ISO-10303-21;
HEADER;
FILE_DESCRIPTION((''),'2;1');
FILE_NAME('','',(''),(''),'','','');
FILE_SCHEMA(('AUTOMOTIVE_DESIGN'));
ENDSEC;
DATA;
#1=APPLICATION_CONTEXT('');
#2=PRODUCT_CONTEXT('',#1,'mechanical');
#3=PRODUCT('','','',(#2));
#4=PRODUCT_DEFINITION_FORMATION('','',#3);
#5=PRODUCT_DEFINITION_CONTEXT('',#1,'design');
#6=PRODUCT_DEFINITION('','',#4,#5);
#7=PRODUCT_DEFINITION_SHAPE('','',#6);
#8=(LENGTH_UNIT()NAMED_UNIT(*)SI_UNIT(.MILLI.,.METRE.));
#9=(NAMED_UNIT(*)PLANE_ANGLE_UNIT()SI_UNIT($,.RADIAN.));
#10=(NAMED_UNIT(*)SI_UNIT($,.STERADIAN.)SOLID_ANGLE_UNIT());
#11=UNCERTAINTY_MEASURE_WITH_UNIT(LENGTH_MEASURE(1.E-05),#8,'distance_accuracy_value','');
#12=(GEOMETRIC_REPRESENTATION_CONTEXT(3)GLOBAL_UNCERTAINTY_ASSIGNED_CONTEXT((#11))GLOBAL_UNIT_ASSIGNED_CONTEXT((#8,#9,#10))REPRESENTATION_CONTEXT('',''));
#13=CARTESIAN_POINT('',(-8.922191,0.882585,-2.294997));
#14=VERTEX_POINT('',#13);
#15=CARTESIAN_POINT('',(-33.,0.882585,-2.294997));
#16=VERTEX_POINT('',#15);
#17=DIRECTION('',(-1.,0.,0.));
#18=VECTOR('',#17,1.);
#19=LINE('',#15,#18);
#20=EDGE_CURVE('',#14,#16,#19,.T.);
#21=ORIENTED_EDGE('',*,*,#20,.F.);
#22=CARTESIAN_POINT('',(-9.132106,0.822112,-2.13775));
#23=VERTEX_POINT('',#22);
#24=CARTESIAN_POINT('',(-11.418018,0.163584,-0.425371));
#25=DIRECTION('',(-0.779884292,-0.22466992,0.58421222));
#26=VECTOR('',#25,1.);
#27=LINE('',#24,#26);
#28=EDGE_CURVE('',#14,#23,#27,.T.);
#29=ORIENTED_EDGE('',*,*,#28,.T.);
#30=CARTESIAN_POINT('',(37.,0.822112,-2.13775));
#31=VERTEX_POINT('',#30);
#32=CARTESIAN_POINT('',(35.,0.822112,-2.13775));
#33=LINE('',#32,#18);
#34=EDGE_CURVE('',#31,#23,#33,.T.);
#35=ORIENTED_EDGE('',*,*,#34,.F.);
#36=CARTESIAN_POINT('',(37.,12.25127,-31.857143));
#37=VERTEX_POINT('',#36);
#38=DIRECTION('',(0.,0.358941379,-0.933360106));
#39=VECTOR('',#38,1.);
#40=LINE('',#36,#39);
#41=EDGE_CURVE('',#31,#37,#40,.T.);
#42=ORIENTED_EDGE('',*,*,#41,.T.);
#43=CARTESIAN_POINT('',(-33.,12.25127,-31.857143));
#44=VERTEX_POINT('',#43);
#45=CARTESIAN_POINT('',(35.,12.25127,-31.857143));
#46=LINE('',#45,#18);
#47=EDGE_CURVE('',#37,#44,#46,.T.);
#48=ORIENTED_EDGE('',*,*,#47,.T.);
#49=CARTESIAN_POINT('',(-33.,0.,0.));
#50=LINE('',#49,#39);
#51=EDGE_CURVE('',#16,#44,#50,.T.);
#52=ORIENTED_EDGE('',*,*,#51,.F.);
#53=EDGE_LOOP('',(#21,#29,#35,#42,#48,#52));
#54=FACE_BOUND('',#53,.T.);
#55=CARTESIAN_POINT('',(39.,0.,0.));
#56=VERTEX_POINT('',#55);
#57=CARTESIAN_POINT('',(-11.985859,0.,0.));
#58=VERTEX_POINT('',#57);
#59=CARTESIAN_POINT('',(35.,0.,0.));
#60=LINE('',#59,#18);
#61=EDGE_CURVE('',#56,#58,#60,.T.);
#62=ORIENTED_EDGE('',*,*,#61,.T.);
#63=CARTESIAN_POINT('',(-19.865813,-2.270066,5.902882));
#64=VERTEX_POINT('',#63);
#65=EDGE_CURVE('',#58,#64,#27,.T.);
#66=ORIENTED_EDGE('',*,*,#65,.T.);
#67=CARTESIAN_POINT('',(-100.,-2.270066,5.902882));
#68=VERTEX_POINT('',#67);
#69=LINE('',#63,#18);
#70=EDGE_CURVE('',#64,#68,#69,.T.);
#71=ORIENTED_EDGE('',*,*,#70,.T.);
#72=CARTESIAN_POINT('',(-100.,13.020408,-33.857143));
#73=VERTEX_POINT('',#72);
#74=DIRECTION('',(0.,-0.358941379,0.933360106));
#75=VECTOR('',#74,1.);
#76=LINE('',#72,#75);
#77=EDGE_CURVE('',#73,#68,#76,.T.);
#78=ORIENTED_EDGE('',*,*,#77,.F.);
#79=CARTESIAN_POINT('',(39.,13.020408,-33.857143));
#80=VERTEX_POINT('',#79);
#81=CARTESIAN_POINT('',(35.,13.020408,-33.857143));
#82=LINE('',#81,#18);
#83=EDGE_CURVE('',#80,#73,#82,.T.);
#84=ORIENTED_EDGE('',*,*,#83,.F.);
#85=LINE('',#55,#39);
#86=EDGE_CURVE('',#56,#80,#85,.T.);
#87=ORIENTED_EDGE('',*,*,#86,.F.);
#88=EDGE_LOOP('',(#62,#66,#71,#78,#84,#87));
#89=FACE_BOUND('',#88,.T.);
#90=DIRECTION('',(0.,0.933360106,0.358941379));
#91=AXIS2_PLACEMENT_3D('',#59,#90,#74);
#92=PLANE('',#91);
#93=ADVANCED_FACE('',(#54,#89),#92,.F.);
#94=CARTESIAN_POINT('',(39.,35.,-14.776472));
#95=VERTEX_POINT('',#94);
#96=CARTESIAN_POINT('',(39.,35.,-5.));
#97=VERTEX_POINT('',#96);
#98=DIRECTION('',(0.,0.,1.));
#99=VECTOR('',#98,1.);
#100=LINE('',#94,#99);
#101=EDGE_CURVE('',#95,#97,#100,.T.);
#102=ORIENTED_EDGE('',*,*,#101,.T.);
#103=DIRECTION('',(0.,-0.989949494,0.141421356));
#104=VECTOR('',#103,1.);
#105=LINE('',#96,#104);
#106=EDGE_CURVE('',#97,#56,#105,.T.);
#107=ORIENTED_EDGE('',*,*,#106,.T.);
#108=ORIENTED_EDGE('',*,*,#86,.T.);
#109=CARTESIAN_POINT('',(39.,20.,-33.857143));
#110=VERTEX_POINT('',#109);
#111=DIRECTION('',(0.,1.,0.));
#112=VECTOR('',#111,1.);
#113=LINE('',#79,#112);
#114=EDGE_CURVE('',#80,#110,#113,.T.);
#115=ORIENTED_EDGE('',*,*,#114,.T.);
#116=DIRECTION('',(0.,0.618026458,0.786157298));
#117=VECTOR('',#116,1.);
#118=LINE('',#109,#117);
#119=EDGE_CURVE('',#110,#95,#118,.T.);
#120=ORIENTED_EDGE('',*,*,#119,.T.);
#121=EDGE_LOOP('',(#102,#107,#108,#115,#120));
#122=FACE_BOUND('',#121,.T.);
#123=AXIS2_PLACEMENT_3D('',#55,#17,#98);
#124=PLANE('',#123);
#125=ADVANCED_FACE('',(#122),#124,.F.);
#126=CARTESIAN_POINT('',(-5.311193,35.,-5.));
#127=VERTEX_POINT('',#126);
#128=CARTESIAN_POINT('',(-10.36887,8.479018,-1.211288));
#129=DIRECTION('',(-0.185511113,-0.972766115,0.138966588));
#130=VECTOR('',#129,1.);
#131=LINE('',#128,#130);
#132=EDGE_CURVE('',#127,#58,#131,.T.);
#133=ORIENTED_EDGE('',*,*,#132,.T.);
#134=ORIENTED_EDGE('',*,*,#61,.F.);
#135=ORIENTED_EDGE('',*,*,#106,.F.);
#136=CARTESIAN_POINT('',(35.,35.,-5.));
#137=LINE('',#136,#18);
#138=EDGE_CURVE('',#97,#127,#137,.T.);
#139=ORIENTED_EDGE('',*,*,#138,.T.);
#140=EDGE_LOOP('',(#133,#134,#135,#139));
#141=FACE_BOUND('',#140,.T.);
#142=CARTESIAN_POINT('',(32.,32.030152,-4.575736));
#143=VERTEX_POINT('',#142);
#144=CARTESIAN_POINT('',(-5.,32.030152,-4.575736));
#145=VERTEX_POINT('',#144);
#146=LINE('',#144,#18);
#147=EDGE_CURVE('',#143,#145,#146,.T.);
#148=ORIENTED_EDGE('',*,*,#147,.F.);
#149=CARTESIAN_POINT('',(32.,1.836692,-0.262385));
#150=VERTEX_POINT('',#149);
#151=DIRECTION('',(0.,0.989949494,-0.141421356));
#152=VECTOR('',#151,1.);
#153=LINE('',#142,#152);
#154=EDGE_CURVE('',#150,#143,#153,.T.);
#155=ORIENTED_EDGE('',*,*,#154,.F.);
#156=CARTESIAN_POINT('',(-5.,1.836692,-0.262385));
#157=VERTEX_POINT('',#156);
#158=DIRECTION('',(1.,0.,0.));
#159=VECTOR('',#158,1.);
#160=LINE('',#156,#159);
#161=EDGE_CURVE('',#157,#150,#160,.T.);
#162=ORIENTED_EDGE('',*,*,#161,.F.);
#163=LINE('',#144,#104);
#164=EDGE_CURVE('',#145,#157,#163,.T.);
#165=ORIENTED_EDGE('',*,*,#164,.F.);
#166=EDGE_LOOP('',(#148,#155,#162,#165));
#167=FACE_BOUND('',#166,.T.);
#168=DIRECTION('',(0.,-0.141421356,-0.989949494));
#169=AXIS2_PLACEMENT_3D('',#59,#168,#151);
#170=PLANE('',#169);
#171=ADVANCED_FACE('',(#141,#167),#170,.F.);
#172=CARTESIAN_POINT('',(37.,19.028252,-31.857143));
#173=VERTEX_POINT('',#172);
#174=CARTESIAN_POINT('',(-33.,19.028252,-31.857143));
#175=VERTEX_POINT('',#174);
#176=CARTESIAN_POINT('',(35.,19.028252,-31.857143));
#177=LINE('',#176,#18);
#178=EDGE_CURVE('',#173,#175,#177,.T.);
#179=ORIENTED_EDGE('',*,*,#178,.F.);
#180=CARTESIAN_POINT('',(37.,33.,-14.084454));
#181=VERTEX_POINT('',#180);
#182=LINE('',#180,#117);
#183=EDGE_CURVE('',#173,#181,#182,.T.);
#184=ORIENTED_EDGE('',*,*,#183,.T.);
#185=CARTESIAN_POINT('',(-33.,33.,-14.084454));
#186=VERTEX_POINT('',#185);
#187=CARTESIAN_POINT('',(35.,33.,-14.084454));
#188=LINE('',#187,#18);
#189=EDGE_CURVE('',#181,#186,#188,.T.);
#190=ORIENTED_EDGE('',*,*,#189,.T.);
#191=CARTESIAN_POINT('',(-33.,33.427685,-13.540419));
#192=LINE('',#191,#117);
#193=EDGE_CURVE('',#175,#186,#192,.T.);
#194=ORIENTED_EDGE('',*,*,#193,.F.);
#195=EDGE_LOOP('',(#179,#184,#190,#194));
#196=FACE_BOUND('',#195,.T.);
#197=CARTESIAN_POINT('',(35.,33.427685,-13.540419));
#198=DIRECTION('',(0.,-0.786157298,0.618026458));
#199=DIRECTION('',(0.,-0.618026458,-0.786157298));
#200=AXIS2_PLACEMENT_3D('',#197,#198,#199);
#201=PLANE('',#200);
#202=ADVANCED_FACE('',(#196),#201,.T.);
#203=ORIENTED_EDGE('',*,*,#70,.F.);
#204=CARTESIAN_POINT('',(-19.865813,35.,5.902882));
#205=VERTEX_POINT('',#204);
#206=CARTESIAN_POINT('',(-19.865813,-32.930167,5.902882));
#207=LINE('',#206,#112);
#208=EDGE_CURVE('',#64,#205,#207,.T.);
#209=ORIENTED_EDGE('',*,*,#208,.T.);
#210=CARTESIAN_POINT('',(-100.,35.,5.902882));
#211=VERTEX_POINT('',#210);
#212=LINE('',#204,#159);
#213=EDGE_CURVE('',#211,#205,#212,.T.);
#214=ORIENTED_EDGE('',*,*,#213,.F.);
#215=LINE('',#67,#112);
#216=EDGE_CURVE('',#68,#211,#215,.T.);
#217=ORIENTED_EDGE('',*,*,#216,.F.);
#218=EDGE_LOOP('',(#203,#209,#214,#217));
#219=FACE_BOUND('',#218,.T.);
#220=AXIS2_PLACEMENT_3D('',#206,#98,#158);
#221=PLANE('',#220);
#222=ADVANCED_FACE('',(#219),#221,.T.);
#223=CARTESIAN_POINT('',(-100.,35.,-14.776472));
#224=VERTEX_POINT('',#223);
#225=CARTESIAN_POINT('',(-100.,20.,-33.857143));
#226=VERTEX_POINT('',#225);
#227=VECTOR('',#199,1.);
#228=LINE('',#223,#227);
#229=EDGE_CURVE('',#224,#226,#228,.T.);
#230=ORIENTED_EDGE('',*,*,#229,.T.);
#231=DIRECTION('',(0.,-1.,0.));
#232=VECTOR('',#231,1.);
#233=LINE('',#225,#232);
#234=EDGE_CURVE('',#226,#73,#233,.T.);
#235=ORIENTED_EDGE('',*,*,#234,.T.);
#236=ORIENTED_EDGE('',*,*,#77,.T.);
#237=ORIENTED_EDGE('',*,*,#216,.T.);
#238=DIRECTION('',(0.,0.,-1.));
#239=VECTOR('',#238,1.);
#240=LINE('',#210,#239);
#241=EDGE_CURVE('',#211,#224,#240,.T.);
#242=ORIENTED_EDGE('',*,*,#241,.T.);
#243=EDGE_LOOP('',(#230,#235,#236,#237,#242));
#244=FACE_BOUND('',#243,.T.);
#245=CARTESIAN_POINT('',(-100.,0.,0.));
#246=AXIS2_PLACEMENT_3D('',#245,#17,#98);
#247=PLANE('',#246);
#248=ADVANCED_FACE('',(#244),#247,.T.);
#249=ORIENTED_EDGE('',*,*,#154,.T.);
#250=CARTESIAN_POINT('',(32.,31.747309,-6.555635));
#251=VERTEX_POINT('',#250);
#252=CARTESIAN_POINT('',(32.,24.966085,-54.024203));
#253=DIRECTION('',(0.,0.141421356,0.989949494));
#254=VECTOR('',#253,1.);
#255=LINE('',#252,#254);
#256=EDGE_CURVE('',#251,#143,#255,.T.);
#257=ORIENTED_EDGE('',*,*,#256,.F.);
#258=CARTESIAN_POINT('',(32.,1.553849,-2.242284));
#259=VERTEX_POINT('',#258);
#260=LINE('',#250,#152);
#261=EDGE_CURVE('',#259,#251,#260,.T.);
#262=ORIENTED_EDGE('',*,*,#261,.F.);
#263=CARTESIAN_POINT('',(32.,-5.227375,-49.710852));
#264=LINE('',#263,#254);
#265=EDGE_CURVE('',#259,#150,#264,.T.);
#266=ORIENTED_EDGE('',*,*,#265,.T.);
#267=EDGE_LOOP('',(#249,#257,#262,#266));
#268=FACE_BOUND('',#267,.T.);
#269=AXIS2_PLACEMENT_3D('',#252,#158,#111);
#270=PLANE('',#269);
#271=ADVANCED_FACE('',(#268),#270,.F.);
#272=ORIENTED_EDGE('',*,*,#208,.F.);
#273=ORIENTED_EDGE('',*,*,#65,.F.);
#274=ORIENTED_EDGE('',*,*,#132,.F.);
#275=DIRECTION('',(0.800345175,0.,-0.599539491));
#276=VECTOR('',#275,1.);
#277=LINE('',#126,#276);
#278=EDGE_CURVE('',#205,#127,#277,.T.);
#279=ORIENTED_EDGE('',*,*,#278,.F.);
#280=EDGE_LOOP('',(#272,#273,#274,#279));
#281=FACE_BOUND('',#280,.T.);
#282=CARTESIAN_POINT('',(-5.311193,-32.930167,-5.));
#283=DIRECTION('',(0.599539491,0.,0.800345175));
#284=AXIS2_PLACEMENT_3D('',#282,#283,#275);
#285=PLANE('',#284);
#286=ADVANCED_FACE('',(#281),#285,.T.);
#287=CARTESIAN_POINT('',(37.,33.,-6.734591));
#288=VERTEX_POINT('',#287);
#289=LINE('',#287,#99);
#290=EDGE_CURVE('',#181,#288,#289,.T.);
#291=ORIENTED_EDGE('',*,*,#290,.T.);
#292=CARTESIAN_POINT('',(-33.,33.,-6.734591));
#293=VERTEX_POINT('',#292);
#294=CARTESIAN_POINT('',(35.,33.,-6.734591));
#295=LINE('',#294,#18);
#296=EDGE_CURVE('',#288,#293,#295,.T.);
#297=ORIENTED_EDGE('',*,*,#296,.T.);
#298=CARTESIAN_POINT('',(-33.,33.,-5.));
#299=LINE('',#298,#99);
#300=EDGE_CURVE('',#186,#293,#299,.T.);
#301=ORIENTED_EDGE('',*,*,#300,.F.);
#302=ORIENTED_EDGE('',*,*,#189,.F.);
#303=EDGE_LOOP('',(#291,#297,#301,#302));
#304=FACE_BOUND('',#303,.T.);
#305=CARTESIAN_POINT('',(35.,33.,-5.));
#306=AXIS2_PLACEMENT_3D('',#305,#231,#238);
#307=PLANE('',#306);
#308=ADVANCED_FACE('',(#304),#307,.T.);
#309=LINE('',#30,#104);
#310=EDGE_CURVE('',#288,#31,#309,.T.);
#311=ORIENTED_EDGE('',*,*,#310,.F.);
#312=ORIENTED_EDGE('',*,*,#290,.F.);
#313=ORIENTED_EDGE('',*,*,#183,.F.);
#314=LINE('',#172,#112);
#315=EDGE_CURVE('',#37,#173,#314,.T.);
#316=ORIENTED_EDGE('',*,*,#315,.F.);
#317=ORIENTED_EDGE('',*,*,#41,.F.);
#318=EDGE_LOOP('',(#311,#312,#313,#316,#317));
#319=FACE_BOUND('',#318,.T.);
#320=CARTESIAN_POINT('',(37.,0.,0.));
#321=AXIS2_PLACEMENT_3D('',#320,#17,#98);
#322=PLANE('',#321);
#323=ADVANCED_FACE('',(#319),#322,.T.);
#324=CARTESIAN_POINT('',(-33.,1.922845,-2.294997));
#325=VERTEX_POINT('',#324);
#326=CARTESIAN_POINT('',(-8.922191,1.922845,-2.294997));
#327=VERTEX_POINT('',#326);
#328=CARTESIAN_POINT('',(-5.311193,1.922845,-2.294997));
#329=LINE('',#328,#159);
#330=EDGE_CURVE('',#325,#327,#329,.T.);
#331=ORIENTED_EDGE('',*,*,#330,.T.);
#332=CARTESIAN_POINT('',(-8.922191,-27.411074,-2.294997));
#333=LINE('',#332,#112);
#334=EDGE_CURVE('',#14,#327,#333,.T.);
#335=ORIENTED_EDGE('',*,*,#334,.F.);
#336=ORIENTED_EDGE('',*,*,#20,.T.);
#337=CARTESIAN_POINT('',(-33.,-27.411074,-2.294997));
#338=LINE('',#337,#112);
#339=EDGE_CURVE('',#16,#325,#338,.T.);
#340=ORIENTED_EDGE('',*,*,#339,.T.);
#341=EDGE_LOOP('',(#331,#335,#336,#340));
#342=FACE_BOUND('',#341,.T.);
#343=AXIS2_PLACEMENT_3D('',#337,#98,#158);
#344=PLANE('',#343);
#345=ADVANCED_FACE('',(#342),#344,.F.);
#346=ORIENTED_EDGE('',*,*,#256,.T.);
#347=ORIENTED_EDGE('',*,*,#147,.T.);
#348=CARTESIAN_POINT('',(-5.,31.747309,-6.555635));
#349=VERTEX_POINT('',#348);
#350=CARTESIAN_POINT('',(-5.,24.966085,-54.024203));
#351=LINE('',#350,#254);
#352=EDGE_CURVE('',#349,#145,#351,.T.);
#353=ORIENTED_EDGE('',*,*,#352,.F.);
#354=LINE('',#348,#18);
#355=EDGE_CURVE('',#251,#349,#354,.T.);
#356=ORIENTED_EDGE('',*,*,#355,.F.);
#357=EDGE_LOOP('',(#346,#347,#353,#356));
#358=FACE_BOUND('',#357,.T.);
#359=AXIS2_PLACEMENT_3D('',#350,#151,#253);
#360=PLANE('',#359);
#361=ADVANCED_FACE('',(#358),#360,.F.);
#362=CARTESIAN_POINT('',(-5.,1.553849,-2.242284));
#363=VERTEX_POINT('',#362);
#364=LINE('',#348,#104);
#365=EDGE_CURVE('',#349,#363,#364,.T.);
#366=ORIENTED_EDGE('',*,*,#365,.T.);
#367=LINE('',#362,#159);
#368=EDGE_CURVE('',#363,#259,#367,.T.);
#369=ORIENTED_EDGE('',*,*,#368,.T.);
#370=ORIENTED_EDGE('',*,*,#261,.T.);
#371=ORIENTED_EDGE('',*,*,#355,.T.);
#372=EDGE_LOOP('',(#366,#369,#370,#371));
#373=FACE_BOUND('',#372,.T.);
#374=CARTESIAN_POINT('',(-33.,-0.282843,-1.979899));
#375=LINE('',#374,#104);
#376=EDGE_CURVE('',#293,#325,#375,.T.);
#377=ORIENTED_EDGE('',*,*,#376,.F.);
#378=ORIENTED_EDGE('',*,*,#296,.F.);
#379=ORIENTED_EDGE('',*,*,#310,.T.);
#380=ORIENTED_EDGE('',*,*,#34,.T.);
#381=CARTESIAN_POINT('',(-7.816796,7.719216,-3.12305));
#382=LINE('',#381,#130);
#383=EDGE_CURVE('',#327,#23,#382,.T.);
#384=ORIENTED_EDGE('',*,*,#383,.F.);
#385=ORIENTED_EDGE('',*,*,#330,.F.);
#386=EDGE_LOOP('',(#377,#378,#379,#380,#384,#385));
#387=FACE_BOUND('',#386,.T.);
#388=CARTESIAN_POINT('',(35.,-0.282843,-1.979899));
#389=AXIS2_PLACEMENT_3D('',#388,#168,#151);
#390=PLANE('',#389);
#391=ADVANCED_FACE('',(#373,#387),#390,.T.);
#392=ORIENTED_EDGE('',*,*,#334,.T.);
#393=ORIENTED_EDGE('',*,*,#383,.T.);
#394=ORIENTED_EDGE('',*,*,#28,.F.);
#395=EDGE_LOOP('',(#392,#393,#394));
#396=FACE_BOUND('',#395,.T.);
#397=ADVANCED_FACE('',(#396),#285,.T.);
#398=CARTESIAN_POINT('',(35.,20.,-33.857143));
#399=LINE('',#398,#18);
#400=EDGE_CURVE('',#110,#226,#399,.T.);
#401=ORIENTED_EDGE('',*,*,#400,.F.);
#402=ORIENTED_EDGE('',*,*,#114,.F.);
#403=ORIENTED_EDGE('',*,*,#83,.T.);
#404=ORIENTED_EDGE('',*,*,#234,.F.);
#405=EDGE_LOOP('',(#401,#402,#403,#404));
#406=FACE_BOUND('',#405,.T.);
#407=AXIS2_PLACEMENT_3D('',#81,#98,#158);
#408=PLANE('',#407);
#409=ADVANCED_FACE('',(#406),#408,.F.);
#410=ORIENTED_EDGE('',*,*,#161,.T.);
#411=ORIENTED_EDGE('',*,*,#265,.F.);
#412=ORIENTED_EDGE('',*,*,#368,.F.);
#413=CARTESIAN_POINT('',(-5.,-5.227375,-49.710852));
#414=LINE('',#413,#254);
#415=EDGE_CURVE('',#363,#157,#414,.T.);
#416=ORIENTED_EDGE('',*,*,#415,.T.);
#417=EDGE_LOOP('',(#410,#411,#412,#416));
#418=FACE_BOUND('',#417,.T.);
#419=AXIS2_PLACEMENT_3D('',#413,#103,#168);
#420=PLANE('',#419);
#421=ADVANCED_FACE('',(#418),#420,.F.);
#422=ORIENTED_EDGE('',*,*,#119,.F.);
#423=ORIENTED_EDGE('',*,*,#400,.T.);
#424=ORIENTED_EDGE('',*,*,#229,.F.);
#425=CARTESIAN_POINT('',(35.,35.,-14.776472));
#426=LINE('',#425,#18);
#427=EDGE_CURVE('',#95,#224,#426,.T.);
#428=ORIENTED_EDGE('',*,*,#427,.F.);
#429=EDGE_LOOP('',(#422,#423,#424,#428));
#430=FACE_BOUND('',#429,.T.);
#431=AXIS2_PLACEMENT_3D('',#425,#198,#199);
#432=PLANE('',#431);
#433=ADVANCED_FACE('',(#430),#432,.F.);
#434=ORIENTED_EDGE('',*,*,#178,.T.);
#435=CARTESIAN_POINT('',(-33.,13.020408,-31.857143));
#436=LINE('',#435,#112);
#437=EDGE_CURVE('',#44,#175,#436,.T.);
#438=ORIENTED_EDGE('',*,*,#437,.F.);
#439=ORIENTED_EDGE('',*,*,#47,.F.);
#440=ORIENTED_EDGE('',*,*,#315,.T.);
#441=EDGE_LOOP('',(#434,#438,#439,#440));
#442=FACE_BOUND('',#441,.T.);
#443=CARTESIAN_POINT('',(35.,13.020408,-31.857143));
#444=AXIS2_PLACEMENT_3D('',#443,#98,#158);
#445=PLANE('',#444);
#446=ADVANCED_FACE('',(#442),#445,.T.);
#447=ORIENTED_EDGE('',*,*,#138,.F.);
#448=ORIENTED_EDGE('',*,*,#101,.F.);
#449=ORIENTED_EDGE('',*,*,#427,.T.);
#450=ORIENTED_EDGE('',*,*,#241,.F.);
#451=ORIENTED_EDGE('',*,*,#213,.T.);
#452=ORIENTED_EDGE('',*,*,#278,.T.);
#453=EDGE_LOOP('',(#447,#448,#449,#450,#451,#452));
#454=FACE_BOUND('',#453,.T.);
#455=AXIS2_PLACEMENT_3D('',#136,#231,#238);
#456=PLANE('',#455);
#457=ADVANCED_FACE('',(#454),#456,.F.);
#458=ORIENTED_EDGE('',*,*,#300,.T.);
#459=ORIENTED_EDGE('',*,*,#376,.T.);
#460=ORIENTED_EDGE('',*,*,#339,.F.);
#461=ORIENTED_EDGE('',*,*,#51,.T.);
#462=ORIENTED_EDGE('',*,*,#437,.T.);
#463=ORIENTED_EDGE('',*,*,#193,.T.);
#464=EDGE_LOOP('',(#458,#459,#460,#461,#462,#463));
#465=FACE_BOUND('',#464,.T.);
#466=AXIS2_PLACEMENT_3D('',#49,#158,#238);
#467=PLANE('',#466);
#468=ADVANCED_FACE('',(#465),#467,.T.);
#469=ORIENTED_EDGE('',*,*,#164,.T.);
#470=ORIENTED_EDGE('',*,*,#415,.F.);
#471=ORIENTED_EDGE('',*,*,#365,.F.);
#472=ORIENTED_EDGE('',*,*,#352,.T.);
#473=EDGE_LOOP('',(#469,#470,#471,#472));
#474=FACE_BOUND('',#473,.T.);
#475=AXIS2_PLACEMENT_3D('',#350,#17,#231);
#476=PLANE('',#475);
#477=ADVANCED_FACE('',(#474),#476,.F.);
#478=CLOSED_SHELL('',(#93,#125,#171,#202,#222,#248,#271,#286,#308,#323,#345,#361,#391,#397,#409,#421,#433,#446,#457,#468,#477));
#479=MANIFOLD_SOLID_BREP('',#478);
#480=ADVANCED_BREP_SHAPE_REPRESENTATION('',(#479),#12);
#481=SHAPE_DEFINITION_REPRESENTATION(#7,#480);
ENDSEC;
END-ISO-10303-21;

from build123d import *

# Parameters (mm, degrees)
BOSS_EXTRUDE9_DEPTH  = 35
SHELL1_T             = -2
SKETCH25_W           = 37
SKETCH25_H           = 30.5
CUT_EXTRUDE6_DEPTH   = 2
BOSS_EXTRUDE11_REACH = 61.969
CUT_EXTRUDE7_START   = -33
CUT_EXTRUDE7_DEPTH   = 27.688806668
BOSS_EXTRUDE12_DEPTH = 65
CUT_EXTRUDE9_START   = -1.04026
CUT_EXTRUDE9_DEPTH   = 1.04026
BOSS_EXTRUDE13_DEPTH = 4
CUT_EXTRUDE14_DEPTH  = 4


# Read off the part's stored shape, not the designer's step: Cut-Extrude7
with BuildPart() as part:
    # Sketch24 → Boss-Extrude9 (new, symmetric)
    with BuildSketch(Plane(origin=(0, 0, 0), x_dir=(0, 0, -1), z_dir=(1, 0, 0))):
        Polygon((0, 0), (5, 35), (14.77647195, 35), (33.857142857, 20), (33.857142857, 13.020408163), align=None)
    extrude(amount=BOSS_EXTRUDE9_DEPTH, both=True)

    # Shell1
    shell1_openings = [part.faces().sort_by_distance(p)[0] for p in [
        (0, 6.510204082, -16.928571429),
    ]]
    offset(amount=SHELL1_T, openings=shell1_openings, kind=Kind.INTERSECTION)

    # Sketch25 → Cut-Extrude6 (cut)
    with BuildSketch(Plane(origin=(0, 0, 0), x_dir=(1, 0, 0), z_dir=(0, 0.1414213562373094, 0.9899494936611667))):
        with Locations((13.5, 17.105339059)):
            Rectangle(SKETCH25_W, SKETCH25_H)
    extrude(amount=-CUT_EXTRUDE6_DEPTH, mode=Mode.SUBTRACT)

    # Boss-Extrude11: up to this plane
    boss_extrude11_end = Plane(origin=(35, 0, 0), z_dir=(0, 0.9333601055458265, 0.35894137874517024))
    # Sketch27 → Boss-Extrude11 (add, up to the surface)
    with BuildSketch(Plane(origin=(0, 35, 0), x_dir=(1, 0, 0), z_dir=(0, 1, 0)), mode=Mode.PRIVATE) as boss_extrude11_sk1:
        Polygon((-5.311193332, 5), (-19.86581292, -5.902882273), (-35, -5.902882273), (-35, 5), align=None)
    boss_extrude11_tool1 = split(extrude(boss_extrude11_sk1.sketch, amount=-BOSS_EXTRUDE11_REACH, mode=Mode.PRIVATE), bisect_by=boss_extrude11_end, keep=Keep.BOTH, mode=Mode.PRIVATE)
    add(boss_extrude11_tool1.solids().sort_by_distance((-23.400412, 35, -0.138611))[0])

    # Cut-Extrude7 outline → Cut-Extrude7 (cut)
    with BuildSketch(Plane.YZ.offset(CUT_EXTRUDE7_START)):
        Polygon((20.857864376, -5), (1.922845087, -2.294997245), (1.922845087, -5), align=None)
    extrude(amount=CUT_EXTRUDE7_DEPTH, mode=Mode.SUBTRACT)

    # Sketch30 → Boss-Extrude12 (add)
    with BuildSketch(Plane.ZY.offset(35)):
        Polygon((-33.857142857, 20), (-33.857142857, 13.020408163), (5.902882273, -2.270065636), (5.902882273, 35), (-14.77647195, 35), align=None)
    extrude(amount=BOSS_EXTRUDE12_DEPTH)

    # Sketch31 → Cut-Extrude9 (cut)
    with BuildSketch(Plane(origin=(0, 1.922845087, 0), x_dir=(1, 0, 0), z_dir=(0, 1, 0)).offset(CUT_EXTRUDE9_START)):
        Polygon((-8.922191333, 2.294997244), (-5.311193332, 5), (-33, 5), (-33, 2.294997244), align=None)
    extrude(amount=CUT_EXTRUDE9_DEPTH, mode=Mode.SUBTRACT)

    # Sketch26 → Boss-Extrude13 (add)
    with BuildSketch(Plane(origin=(35, 0, 0), x_dir=(0, 0, -1), z_dir=(1, 0, 0))):
        Polygon((5, 35), (0, 0), (33.857142857, 13.020408163), (33.857142857, 20), (14.77647195, 35), align=None)
    extrude(amount=BOSS_EXTRUDE13_DEPTH)

    # Sketch36 → Cut-Extrude14 (cut)
    with BuildSketch(Plane.ZY.offset(-33)):
        Polygon((-31.857142857, 12.251270128), (-2.137749704, 0.822112303), (-6.734590803, 33), (-14.084453997, 33), (-31.857142857, 19.028251617), align=None)
    extrude(amount=-CUT_EXTRUDE14_DEPTH, mode=Mode.SUBTRACT)


solid = part.part
